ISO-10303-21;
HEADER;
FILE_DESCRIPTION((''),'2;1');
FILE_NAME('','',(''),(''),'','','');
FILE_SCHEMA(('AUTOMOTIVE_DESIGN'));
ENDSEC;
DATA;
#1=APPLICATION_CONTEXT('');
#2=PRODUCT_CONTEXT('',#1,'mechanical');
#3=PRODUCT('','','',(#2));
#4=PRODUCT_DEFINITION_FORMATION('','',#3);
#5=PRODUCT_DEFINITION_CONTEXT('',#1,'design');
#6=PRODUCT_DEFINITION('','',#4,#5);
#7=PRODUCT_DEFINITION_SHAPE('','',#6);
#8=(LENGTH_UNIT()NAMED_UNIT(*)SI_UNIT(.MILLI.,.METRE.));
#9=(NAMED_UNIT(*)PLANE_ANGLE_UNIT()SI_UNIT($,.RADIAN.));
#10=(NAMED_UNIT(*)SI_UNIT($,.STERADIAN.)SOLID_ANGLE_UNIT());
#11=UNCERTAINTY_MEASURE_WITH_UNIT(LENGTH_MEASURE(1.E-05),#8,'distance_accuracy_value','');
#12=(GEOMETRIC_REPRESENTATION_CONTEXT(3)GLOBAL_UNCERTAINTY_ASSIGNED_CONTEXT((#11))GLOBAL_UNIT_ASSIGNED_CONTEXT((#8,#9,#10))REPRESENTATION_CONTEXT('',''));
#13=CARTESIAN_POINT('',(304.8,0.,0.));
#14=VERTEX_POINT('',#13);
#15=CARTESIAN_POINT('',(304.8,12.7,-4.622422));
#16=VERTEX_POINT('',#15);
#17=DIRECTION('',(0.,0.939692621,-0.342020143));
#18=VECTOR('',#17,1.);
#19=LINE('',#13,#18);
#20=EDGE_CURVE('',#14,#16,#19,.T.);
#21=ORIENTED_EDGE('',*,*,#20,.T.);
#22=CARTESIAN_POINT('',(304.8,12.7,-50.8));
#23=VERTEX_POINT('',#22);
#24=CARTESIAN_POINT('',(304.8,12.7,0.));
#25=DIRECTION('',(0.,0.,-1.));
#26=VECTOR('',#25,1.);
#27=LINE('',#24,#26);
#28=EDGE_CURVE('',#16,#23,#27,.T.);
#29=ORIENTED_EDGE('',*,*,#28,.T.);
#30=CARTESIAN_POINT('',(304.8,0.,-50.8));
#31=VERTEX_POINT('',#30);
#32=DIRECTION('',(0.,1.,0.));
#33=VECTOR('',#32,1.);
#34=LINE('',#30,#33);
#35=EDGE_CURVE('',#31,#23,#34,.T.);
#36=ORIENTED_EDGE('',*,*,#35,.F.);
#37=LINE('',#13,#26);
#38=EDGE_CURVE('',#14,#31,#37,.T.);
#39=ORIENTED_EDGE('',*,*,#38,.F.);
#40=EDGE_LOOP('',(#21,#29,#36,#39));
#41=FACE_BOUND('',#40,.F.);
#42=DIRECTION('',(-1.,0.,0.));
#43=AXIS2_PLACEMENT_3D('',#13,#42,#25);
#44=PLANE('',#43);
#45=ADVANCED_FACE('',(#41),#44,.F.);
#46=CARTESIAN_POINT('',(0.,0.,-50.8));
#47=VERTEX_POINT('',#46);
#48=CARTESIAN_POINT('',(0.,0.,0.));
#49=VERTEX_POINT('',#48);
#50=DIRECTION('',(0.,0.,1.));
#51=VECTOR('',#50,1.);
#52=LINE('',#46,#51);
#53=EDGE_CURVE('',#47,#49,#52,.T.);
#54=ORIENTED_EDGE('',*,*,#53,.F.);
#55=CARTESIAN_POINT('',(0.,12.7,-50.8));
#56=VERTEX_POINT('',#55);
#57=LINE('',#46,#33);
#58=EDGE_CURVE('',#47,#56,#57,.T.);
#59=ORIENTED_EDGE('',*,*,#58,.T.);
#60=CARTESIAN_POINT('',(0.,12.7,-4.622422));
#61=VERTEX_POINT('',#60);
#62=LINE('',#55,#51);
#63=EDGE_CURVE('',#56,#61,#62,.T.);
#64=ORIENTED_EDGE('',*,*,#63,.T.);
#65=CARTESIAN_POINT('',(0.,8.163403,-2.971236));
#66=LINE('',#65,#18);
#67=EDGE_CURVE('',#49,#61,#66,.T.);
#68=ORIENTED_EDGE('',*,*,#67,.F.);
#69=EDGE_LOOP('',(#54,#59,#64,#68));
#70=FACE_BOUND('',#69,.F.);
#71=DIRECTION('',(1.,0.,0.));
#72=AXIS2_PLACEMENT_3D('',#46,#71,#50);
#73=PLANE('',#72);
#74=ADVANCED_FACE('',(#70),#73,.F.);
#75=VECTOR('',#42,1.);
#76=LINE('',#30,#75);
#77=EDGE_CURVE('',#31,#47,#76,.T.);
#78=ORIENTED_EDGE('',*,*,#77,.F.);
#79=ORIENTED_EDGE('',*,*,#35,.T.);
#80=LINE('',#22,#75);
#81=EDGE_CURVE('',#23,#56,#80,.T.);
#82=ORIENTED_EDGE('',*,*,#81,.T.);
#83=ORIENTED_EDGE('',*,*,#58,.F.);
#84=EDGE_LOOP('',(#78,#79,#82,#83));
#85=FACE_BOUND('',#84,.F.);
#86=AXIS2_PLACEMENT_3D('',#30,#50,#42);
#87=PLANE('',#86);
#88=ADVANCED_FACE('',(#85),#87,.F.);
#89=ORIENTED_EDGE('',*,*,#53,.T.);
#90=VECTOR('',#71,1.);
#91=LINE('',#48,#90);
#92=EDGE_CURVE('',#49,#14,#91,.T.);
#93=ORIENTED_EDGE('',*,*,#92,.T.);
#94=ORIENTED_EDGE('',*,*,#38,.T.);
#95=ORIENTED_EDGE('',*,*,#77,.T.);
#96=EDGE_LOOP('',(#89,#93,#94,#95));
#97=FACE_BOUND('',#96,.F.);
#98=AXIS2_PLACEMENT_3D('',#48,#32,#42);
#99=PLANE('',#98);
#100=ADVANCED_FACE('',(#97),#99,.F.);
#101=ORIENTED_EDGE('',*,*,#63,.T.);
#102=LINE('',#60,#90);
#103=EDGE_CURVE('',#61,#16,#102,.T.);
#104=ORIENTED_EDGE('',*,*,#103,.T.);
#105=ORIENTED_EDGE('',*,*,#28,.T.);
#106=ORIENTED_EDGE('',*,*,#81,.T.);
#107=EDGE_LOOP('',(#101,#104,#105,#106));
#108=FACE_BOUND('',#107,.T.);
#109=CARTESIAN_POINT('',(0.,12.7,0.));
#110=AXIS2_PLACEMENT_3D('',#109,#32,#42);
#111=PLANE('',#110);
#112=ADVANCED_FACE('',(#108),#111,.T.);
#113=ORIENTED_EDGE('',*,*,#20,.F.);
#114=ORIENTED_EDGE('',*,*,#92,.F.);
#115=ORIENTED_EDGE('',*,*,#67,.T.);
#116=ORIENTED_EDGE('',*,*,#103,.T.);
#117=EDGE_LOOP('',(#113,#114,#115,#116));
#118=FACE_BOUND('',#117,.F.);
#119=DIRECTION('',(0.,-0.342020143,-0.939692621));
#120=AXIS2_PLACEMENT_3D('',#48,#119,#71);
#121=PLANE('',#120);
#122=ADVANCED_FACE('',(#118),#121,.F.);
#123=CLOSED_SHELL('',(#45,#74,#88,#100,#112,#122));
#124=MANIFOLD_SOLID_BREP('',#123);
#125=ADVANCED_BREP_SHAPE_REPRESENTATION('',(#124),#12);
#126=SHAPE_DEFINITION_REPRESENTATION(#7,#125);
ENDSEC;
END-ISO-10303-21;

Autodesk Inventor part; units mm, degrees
ref_plane "YZ Plane" through (0, 0, 0) normal (1, 0, 0) x (0, 1, 0)
ref_plane "XZ Plane" through (0, 0, 0) normal (0, 1, 0) x (-1, 0, 0)
ref_plane "XY Plane" through (0, 0, 0) normal (0, 0, 1) x (1, 0, 0)
sketch "Sketch1" plane through (0, 0, 0) normal (0, 1, 0) x (-1, 0, 0)
  line L0 (0, 0) -> (-304.8, 0)
  line L1 (-304.8, 0) -> (-304.8, -50.8)
  line L2 (-304.8, -50.8) -> (0, -50.8)
  line L3 (0, -50.8) -> (0, 0)
  dimension "d0" = 50.8
  dimension "d1" = 304.8
extrude "Extrusion1" add sketch "Sketch1" along normal blind 12.7
draft "FaceDraft1" angle 20 pull direction (0, 1, 0) faces at (101.6, 4.2333, 0) fixed edges at (152.4, 0, 0)
properties material "MDF Medium Density Fiberboard"
